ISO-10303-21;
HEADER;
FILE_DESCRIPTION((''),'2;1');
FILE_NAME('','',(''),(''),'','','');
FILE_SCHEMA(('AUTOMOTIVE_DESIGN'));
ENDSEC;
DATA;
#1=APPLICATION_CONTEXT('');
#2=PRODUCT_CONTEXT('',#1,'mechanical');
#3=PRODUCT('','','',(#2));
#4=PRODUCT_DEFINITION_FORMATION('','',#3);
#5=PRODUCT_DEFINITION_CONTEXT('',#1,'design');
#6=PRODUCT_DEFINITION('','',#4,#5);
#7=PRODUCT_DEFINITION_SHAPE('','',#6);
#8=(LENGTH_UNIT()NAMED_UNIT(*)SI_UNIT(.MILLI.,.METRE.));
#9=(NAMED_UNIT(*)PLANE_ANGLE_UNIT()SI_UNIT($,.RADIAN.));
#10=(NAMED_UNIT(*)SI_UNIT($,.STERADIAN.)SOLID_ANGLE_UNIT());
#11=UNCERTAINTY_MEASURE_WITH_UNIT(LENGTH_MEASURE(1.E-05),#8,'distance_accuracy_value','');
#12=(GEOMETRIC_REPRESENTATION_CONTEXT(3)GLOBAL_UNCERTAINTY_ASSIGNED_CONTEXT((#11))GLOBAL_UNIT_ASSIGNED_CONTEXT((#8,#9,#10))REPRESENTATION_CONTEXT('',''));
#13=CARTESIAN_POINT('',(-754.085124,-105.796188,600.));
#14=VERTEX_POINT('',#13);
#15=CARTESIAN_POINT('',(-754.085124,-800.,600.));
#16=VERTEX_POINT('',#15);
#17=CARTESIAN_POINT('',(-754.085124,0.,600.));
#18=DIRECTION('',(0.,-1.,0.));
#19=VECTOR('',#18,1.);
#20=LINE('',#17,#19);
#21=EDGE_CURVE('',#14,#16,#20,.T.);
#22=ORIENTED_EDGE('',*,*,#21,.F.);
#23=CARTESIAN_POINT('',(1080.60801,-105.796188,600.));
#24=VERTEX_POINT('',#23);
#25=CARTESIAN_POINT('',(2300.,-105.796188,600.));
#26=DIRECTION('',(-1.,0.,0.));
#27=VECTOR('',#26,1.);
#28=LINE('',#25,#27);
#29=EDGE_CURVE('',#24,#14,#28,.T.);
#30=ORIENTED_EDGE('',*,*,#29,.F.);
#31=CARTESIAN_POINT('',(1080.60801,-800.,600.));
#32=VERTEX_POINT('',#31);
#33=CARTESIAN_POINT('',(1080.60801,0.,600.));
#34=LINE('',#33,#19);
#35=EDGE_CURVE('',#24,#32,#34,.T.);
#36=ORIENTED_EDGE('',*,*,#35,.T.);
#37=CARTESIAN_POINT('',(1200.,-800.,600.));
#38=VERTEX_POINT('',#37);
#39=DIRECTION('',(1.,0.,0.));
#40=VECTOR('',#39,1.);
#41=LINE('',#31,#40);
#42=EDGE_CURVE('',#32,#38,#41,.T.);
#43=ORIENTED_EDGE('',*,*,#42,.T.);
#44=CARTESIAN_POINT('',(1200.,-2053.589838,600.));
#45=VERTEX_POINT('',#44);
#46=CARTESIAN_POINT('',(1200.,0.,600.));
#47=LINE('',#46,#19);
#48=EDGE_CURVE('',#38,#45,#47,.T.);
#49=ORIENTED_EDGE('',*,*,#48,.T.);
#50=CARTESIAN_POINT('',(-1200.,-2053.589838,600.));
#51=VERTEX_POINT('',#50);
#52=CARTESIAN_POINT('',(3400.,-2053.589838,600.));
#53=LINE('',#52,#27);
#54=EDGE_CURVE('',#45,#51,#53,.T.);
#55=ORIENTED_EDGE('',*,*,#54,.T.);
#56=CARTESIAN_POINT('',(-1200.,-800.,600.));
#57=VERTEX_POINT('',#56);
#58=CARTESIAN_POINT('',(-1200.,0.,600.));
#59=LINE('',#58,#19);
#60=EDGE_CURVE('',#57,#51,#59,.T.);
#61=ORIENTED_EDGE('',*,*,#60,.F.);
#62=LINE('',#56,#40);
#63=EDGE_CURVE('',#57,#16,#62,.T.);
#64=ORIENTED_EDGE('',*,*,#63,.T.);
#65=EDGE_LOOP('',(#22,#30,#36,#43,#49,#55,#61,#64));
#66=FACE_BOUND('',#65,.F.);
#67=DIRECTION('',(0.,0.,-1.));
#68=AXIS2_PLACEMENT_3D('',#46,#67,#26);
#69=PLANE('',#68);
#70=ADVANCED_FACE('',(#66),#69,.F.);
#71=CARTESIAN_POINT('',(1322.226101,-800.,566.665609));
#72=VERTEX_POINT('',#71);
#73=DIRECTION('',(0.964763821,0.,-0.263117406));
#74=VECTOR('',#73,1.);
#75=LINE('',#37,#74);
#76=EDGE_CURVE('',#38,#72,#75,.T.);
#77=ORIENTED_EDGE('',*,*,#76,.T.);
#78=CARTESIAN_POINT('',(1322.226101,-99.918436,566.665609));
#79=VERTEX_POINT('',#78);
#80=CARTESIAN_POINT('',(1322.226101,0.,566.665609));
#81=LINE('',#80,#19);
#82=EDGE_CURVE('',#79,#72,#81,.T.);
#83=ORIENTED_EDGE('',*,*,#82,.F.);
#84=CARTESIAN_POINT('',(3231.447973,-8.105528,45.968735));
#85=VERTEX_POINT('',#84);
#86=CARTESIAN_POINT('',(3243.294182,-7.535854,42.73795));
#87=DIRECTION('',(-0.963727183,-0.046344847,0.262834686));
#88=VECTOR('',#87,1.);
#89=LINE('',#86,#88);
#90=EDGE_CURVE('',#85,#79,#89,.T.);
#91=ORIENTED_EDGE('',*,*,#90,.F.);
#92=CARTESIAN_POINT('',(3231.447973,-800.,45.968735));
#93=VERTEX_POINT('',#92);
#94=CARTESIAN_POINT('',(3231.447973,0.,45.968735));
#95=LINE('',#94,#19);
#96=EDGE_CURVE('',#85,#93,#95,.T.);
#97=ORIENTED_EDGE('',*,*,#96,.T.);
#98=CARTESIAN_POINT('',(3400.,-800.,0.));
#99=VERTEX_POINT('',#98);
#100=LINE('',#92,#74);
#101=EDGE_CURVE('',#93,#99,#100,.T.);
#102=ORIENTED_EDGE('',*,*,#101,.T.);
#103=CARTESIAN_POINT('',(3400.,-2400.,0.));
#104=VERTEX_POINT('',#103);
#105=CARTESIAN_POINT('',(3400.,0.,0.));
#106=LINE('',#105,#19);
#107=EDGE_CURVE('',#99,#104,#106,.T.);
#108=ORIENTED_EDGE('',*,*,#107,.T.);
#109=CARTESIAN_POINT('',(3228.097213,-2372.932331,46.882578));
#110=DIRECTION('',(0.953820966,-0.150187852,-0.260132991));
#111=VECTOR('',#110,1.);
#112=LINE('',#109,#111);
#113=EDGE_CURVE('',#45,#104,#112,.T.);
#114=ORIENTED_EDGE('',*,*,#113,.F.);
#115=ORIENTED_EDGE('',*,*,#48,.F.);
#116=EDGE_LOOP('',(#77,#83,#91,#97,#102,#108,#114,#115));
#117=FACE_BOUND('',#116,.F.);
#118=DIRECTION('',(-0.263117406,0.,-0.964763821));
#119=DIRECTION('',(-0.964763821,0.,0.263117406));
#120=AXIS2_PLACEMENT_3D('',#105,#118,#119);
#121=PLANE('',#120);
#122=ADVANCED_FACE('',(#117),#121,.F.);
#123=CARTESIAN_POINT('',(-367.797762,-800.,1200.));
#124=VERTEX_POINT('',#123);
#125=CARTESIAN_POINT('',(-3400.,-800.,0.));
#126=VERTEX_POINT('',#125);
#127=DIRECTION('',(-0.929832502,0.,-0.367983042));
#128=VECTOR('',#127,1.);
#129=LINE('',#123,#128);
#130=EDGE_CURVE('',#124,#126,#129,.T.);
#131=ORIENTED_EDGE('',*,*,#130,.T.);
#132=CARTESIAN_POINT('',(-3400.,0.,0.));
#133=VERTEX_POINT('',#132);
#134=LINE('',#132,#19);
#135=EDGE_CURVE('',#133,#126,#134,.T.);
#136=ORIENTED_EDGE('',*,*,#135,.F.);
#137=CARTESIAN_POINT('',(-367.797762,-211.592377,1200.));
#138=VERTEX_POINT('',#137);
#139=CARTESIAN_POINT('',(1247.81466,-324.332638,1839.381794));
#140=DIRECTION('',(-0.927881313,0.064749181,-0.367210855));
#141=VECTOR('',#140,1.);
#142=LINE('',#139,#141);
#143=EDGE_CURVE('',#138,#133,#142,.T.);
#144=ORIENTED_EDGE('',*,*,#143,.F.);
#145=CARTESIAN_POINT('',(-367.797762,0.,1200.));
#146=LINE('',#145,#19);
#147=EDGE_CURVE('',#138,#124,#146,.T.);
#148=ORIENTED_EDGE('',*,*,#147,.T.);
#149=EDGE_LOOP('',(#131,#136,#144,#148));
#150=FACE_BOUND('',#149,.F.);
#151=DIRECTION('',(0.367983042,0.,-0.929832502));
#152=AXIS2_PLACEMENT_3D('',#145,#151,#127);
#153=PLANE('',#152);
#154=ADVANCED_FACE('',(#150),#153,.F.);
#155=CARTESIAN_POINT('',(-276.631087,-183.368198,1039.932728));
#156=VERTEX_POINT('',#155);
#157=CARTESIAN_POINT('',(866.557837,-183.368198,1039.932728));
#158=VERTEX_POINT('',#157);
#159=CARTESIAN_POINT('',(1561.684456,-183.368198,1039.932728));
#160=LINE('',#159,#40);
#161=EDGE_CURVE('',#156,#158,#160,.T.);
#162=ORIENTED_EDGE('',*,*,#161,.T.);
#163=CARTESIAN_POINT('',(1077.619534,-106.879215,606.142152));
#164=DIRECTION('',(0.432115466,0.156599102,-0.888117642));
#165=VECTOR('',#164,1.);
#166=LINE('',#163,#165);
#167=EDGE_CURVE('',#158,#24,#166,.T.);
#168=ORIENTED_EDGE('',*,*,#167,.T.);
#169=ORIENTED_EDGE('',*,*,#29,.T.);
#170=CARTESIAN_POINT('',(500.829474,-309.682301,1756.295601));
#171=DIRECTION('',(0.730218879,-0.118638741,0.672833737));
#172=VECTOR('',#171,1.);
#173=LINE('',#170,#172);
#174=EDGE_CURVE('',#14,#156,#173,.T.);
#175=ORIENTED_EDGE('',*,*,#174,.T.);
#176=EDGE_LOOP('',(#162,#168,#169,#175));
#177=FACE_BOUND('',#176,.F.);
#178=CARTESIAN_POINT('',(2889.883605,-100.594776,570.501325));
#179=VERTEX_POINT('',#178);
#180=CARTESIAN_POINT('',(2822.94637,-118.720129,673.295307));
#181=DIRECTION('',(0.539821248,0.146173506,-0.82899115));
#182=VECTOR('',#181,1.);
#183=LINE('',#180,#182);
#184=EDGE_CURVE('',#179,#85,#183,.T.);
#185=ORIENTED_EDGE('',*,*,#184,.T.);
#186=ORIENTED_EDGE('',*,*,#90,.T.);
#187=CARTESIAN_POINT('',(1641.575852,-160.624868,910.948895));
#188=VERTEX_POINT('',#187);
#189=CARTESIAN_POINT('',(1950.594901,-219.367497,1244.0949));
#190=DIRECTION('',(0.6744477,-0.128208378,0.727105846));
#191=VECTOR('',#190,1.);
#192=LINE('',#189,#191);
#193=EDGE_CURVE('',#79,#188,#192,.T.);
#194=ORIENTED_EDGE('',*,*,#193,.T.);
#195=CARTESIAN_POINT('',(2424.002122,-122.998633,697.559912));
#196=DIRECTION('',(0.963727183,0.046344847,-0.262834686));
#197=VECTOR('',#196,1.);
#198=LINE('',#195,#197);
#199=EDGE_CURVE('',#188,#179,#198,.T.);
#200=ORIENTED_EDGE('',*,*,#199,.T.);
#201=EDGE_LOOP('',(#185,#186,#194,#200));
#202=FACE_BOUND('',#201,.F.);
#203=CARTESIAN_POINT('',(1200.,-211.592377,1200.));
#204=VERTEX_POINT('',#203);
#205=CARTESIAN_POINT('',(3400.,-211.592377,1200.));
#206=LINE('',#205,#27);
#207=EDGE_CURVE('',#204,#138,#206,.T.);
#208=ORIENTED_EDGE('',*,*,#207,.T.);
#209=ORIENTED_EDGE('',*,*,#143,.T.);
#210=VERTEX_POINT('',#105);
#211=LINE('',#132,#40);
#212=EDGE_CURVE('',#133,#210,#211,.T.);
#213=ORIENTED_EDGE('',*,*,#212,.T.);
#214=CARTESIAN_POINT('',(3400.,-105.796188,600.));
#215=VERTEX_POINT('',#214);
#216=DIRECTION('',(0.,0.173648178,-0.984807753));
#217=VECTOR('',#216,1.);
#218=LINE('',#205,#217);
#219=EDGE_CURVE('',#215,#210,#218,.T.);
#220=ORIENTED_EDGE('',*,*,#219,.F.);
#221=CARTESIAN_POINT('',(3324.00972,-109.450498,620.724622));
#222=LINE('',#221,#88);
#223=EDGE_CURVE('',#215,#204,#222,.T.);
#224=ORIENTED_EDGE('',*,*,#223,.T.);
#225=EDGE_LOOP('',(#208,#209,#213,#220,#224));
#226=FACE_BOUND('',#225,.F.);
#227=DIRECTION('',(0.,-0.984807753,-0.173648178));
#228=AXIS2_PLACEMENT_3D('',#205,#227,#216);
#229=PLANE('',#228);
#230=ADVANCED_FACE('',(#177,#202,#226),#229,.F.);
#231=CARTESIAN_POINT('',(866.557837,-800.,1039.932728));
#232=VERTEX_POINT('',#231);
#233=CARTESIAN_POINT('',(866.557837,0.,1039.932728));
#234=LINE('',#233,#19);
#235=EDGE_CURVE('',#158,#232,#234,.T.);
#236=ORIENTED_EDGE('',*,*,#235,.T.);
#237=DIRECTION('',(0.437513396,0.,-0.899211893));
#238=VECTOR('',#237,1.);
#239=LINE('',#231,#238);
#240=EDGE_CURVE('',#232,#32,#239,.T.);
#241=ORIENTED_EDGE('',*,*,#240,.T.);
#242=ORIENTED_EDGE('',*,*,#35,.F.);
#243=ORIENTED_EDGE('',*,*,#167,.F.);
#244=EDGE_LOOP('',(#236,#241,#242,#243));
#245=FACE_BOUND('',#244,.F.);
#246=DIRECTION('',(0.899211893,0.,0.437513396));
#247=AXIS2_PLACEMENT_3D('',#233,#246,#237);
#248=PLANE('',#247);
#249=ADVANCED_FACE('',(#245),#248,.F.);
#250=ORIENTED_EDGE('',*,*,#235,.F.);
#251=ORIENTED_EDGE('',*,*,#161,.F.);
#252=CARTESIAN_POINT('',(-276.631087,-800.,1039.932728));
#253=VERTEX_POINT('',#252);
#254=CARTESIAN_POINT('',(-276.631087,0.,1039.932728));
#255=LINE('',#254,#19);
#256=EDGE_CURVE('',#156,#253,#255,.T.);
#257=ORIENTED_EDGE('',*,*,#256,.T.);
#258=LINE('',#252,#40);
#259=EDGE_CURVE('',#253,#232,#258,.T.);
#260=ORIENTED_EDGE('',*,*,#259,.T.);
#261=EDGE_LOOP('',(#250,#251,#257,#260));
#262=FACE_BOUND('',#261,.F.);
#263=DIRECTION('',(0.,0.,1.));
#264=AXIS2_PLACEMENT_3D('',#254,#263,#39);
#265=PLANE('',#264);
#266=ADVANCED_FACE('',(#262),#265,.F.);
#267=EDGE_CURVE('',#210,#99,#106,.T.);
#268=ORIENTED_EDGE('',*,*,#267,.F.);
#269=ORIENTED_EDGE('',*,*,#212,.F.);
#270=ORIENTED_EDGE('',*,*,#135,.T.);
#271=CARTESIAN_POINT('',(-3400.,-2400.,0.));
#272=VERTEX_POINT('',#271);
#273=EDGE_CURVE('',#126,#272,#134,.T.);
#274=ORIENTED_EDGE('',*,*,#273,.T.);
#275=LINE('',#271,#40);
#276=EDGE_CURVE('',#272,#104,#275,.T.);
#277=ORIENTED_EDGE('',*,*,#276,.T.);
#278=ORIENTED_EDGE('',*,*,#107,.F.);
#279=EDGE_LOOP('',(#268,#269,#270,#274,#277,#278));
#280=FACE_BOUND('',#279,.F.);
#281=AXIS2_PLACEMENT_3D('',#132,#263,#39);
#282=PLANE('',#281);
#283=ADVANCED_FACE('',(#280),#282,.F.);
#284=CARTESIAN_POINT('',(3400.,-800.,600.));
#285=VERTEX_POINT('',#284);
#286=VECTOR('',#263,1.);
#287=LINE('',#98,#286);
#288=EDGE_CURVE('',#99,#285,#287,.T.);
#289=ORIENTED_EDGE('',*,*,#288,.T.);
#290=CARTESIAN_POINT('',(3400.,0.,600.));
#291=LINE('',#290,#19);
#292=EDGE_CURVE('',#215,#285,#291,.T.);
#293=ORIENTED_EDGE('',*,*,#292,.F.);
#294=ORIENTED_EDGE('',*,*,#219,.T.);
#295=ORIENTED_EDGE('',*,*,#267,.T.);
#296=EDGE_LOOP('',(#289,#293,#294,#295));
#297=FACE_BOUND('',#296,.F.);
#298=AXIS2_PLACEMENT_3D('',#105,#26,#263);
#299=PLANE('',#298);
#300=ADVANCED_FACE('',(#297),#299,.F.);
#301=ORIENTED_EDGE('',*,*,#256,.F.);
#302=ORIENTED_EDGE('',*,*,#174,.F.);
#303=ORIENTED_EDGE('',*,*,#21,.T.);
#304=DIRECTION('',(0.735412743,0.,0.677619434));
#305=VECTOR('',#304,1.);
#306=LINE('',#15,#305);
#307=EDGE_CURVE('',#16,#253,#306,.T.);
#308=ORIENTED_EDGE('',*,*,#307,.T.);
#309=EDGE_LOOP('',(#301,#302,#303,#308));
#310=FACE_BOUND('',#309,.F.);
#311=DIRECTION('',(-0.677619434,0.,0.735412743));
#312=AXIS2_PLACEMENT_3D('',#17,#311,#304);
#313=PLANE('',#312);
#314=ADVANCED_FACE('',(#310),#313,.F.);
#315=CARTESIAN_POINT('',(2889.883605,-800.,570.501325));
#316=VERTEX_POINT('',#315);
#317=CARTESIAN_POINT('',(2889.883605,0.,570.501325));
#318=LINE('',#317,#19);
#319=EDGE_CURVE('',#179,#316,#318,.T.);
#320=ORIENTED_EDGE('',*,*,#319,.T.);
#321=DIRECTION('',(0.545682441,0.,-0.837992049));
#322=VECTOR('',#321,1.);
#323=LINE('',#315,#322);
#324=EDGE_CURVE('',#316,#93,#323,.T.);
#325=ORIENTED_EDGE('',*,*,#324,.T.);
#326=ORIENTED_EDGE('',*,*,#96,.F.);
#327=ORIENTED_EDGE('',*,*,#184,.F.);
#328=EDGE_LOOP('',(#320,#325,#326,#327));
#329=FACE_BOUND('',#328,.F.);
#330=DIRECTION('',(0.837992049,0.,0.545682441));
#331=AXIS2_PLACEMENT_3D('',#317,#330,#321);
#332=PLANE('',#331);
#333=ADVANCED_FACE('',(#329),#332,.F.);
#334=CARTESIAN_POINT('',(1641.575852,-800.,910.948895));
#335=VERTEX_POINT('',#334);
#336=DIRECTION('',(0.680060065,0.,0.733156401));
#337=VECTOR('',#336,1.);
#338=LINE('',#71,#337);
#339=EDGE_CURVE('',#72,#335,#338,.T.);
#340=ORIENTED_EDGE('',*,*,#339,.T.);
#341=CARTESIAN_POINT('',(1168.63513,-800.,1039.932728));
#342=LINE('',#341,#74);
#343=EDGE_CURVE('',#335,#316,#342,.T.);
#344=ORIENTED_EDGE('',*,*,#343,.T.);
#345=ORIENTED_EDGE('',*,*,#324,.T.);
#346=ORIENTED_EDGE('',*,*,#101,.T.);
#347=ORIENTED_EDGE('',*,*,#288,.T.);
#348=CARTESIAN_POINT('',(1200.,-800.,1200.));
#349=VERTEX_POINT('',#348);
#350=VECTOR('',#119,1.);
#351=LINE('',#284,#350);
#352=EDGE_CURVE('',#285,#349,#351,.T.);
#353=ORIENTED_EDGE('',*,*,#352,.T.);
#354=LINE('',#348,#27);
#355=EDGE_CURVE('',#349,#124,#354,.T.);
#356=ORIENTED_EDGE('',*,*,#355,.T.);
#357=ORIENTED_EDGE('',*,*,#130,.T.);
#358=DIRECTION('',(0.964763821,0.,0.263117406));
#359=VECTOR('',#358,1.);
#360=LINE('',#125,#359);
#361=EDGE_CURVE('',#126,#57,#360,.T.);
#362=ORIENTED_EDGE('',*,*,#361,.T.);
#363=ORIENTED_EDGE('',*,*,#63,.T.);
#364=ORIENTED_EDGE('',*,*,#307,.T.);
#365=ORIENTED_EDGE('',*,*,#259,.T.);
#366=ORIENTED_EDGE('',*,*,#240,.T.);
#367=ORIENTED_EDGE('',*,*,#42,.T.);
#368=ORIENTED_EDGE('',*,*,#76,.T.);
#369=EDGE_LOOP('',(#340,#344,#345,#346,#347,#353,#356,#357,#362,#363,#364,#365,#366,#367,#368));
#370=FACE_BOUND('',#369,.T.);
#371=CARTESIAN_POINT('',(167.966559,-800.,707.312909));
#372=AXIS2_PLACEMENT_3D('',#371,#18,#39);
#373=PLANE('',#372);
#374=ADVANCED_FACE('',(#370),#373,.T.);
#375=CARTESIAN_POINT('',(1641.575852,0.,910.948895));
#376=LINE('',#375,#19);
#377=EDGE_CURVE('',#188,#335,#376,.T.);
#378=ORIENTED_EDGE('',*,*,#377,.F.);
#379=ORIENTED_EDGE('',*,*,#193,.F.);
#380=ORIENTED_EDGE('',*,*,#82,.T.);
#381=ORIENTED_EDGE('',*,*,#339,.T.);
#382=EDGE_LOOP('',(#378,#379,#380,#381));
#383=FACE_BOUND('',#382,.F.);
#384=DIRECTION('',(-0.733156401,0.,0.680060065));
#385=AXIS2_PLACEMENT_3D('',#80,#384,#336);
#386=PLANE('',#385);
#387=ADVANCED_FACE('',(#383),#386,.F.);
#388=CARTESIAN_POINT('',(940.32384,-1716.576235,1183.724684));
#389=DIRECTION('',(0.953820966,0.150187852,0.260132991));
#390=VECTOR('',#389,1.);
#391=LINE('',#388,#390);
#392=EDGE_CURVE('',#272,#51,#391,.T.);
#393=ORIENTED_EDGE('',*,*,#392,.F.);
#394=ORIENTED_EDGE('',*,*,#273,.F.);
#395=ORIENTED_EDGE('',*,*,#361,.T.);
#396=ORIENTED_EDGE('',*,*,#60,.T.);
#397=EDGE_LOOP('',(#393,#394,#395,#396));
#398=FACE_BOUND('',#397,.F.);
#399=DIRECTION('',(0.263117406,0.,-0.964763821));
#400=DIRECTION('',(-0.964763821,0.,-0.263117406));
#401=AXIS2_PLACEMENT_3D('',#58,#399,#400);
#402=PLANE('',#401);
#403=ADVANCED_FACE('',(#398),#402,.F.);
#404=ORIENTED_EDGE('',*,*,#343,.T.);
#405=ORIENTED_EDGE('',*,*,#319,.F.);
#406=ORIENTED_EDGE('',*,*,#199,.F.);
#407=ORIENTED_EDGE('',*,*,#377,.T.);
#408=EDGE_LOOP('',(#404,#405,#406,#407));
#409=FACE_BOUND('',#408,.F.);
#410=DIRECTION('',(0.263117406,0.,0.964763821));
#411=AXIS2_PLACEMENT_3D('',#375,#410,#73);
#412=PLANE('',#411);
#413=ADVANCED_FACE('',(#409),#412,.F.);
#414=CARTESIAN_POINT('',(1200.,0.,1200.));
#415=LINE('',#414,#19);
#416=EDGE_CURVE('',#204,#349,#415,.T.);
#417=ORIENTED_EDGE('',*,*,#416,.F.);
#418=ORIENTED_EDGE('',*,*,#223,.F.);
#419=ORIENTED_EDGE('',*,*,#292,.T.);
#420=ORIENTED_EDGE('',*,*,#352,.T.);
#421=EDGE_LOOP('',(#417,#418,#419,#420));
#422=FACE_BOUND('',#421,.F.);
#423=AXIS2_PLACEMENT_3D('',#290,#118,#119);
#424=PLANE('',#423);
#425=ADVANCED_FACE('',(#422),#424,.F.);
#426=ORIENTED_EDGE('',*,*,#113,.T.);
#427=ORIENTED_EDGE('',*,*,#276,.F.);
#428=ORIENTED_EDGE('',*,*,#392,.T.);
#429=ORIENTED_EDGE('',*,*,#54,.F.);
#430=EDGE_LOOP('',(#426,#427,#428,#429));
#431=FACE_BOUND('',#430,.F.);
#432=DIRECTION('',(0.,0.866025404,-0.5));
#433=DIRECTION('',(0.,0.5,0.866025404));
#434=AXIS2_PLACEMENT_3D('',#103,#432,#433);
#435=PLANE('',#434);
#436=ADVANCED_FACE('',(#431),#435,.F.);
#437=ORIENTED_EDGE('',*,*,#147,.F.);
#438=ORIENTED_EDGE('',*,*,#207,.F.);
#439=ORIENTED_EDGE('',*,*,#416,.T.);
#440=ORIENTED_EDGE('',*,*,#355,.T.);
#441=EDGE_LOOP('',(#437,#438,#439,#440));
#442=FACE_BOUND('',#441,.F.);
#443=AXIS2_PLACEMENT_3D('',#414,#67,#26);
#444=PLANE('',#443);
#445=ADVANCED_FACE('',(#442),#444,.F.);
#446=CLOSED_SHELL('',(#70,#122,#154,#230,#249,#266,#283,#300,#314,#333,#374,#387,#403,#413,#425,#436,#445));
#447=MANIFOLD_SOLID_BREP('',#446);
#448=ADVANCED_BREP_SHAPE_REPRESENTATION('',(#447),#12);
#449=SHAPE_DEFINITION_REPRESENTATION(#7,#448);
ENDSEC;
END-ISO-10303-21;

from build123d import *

# Parameters (mm, degrees)
F2_DEPTH = 800
F3_DEPTH = 2400
F5_DEPTH = 6800.001


# Not quite as in the source:
# - a feature names something its author has since deleted; it is built from what else it names


with BuildPart() as f2:
    # F1 (on Front) → F2 (new body)
    with BuildSketch(Plane.XZ):
        Polygon((3231.4479728419, 45.9687346795), (3400, 0), (3400, 600), (1200, 1200), (-367.7977621555, 1200), (-3400, 0), (-1200, 600), (-754.085123539, 600), (-276.6310870647, 1039.9327278137), (866.5578365326, 1039.9327278137), (1168.6351299286, 1039.9327278137), (1641.5758518072, 910.9488945741), (2889.8836052394, 570.5013254562), align=None)
        Polygon((1200, 600), (1322.2261014351, 566.6656086995), (1641.5758518072, 910.9488945741), (1168.6351299286, 1039.9327278137), (866.5578365326, 1039.9327278137), (1080.6080102921, 600), align=None)
    extrude(amount=F2_DEPTH)

    # F1 (on Front) → F3 (join)
    with BuildSketch(Plane.XZ):
        Polygon((-3400, 0), (3400, 0), (3231.4479728419, 45.9687346795), (1322.2261014351, 566.6656086995), (1200, 600), (1080.6080102921, 600), (-754.085123539, 600), (-1200, 600), align=None)
    extrude(amount=F3_DEPTH)

    # F4 (on face) → F5 (cut, through all)
    with BuildSketch(Plane.YZ.offset(3400)):
        Polygon((0, 600), (0, 1200), (-211.5923768502, 1200), (-105.7961884251, 600), align=None)
        Polygon((0, 0), (0, 600), (-105.7961884251, 600), align=None)
        Polygon((-2400, 600), (-2400, 0), (-2053.5898384862, 600), align=None)
    extrude(amount=-F5_DEPTH, mode=Mode.SUBTRACT)


solid = f2.part
